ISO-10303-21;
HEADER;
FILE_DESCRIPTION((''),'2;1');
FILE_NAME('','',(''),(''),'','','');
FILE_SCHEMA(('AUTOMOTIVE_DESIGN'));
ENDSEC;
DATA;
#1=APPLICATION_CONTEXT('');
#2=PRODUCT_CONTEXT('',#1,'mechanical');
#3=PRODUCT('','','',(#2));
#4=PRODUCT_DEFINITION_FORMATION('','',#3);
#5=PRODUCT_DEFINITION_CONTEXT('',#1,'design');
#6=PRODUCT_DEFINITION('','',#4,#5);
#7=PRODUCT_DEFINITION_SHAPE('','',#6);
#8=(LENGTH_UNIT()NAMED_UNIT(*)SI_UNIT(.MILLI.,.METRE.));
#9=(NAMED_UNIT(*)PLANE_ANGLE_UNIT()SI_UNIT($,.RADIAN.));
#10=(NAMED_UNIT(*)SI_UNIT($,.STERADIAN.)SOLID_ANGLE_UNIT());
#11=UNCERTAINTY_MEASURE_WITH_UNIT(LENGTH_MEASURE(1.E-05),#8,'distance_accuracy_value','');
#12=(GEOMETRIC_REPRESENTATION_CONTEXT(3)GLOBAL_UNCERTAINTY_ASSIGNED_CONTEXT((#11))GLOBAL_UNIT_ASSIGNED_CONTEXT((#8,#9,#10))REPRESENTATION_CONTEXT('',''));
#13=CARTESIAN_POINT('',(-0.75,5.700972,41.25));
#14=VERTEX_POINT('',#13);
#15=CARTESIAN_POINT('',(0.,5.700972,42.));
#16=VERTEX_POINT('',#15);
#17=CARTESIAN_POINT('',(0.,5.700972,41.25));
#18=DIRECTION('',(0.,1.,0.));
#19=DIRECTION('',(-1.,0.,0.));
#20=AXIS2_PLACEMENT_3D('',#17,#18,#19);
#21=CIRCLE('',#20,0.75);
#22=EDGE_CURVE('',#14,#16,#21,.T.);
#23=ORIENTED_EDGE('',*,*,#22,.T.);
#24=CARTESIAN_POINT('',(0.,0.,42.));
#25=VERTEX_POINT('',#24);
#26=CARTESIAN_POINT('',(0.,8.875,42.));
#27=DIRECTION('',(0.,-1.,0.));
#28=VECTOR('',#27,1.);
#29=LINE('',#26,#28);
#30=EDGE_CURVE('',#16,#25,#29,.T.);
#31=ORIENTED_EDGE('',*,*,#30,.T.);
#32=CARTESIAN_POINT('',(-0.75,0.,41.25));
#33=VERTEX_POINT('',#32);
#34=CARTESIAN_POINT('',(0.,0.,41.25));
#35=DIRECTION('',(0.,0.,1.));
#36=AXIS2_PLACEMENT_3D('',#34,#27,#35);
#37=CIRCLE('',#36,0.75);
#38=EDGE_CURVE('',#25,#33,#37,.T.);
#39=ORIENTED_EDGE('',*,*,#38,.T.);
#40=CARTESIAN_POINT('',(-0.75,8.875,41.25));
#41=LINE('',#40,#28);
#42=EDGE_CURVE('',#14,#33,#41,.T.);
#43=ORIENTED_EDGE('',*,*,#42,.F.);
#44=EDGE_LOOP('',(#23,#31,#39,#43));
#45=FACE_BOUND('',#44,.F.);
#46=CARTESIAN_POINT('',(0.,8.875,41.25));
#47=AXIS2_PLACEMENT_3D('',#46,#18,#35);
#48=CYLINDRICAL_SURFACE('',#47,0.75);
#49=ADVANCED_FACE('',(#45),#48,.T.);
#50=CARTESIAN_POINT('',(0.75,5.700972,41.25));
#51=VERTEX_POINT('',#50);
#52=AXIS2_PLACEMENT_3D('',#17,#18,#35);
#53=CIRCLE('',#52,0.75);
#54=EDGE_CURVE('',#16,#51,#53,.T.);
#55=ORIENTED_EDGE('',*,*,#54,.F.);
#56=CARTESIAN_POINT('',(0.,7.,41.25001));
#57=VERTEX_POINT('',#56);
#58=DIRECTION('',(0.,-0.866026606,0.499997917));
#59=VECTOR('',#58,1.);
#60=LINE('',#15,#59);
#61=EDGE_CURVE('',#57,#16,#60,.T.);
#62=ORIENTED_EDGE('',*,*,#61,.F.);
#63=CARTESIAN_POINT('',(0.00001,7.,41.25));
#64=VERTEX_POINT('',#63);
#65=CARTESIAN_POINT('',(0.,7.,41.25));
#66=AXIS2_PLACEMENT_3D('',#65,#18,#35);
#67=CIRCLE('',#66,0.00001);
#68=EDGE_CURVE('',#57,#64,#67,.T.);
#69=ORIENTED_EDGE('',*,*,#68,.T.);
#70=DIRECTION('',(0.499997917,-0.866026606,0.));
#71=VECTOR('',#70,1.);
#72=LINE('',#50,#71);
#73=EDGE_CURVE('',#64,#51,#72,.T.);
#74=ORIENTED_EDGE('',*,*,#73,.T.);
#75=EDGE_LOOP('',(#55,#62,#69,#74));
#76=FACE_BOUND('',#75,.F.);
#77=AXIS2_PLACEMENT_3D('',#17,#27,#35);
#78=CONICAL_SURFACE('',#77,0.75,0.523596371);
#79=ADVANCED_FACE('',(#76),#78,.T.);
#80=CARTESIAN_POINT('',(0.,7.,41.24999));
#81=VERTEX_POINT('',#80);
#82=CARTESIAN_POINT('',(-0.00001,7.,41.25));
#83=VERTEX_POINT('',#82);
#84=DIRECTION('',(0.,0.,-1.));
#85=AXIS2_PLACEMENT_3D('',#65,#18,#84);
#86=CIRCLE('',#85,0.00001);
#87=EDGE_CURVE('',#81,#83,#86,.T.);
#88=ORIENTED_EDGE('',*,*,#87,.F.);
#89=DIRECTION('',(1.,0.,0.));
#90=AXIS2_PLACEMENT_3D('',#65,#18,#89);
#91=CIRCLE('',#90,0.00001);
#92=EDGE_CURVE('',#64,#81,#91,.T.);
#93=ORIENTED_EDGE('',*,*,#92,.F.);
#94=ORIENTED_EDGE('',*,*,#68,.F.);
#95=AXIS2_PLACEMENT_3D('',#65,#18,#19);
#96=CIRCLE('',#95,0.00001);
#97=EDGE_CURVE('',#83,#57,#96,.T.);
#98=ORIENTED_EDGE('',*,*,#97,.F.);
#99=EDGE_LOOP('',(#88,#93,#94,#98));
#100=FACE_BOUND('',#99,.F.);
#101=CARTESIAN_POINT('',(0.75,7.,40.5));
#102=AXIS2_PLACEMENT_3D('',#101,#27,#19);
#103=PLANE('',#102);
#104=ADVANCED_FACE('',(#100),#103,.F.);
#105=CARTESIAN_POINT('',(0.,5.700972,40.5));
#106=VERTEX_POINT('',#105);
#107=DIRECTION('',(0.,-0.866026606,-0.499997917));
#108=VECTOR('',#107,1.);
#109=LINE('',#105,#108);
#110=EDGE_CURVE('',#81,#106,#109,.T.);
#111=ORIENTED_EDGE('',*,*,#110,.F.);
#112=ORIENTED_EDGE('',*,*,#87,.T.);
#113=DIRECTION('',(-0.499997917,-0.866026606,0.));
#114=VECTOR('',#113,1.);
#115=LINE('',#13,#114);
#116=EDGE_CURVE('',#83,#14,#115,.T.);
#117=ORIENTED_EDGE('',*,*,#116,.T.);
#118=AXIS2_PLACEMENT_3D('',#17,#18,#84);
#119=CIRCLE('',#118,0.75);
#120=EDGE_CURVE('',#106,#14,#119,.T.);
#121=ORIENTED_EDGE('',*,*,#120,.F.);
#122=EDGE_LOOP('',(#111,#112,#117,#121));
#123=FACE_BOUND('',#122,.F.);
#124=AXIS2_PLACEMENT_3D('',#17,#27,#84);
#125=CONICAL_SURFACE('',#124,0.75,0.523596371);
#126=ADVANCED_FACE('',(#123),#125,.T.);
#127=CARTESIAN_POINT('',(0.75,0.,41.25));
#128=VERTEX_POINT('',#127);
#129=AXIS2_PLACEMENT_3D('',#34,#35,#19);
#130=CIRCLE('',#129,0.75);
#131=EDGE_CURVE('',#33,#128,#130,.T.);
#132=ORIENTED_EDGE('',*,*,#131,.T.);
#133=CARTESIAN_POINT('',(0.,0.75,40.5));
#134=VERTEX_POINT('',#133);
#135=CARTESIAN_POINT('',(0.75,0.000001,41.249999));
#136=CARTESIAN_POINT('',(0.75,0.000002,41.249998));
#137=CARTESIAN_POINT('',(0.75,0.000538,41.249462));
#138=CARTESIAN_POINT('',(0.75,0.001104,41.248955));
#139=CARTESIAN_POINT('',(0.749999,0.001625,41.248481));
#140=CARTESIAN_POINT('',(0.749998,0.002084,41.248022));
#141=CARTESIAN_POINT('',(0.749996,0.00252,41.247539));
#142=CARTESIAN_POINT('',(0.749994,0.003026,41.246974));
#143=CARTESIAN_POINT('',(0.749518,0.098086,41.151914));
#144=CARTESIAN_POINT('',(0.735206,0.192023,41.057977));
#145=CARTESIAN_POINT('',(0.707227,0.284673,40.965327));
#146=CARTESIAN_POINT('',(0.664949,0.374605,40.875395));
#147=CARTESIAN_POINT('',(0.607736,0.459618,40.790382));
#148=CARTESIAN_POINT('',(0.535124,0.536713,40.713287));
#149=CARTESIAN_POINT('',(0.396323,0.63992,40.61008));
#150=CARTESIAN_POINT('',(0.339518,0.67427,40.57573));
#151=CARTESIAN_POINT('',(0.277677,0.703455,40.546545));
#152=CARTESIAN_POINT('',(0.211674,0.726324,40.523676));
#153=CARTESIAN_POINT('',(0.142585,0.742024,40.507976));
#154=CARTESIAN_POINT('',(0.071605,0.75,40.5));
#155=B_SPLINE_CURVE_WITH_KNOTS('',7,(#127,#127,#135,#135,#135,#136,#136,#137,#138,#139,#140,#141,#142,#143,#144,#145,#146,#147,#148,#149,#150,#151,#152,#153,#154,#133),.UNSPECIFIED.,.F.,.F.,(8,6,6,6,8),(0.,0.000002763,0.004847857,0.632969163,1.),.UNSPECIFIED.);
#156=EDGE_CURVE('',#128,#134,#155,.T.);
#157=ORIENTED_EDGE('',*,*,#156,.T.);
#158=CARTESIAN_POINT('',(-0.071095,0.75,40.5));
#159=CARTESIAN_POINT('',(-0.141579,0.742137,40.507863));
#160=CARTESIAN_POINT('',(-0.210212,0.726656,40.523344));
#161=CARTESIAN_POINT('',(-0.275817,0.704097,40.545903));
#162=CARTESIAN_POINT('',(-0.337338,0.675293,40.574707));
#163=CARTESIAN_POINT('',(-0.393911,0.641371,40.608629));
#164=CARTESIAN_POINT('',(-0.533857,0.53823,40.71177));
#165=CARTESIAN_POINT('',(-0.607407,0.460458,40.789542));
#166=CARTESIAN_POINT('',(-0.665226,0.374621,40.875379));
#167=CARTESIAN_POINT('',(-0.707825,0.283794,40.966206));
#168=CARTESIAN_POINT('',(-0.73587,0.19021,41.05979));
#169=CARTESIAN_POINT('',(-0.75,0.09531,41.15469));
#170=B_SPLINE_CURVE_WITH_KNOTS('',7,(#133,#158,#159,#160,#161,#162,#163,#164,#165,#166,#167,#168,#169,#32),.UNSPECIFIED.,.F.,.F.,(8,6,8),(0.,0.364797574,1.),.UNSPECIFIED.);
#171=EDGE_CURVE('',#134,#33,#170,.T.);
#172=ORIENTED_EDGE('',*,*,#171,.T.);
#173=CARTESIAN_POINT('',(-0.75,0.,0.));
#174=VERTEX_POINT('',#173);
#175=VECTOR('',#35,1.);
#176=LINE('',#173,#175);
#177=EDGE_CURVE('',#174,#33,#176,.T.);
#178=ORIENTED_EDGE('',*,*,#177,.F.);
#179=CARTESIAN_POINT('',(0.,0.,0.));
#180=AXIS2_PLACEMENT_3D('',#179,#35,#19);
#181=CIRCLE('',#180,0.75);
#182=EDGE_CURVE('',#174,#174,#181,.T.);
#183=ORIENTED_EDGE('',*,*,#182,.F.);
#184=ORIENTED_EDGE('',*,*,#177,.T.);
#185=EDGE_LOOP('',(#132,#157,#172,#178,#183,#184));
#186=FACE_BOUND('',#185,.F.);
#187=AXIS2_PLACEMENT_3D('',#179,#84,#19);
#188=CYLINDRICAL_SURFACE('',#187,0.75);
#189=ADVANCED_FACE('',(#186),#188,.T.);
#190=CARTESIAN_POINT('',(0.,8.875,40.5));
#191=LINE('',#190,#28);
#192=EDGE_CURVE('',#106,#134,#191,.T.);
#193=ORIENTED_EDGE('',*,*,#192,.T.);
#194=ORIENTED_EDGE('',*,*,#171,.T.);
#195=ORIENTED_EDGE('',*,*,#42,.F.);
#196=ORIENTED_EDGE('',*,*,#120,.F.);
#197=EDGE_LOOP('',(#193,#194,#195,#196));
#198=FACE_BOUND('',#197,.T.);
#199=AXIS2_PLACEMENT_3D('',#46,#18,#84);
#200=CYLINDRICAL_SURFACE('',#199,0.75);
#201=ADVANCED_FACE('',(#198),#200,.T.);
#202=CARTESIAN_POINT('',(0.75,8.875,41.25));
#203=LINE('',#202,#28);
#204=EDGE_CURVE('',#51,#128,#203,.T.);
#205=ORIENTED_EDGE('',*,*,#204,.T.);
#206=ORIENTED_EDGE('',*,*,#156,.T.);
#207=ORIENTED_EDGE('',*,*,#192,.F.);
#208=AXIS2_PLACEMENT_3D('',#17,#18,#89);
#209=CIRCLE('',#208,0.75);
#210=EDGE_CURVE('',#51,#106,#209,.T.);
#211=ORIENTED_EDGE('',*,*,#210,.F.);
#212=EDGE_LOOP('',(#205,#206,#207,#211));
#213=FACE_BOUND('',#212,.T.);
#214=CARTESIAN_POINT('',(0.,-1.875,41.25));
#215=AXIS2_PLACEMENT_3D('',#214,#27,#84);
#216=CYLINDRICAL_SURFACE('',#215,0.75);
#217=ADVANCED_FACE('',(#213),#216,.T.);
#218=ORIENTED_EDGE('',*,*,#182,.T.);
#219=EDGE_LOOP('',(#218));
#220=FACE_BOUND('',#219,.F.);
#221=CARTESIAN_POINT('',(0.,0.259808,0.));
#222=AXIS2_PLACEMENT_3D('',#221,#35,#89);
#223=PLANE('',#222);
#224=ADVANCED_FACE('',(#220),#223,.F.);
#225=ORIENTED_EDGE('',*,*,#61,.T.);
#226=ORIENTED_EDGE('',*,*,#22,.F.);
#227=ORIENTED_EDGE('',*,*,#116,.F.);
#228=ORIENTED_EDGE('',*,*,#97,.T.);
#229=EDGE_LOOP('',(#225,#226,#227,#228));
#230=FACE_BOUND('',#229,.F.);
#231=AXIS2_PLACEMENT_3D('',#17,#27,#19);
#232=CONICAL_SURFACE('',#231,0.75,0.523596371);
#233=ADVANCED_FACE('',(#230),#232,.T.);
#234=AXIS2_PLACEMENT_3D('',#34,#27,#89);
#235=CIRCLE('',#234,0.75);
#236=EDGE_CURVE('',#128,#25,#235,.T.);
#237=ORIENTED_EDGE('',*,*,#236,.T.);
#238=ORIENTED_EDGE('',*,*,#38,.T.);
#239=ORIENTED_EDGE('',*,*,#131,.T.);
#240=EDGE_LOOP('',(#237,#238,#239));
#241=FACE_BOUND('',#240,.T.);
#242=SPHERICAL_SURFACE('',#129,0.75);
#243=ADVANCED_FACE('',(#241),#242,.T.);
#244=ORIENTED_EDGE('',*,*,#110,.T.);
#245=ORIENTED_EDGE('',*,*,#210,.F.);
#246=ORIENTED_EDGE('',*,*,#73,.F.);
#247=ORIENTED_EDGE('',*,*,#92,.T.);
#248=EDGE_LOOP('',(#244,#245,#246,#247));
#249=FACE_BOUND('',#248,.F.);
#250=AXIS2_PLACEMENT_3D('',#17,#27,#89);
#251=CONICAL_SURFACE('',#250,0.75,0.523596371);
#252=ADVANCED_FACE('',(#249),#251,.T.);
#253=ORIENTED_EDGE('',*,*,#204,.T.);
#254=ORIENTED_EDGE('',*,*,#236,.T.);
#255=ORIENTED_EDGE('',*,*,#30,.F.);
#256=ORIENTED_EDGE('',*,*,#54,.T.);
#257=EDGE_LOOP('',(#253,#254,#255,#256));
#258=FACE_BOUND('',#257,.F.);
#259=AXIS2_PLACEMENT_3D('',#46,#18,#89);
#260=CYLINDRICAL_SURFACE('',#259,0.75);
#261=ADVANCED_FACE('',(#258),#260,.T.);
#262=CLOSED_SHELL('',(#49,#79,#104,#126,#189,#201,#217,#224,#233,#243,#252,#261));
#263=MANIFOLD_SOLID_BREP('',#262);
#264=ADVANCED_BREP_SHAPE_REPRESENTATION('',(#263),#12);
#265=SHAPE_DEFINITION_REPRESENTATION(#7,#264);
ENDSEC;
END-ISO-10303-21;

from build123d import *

# Parameters (mm, degrees)
F1_DEPTH     = 42
F2_START     = 40.5
F2_DEPTH     = 1.5
F3_T1_DEPTH  = 8.875
F3_T4_ANGLE  = 180
F3_T8_DEPTH  = 10.75
F3_S9_R      = 0.75
F3_T10_DEPTH = 7
F3_T14_DEPTH = 10.75
F3_S15_R     = 0.75
F3_T16_DEPTH = 7
F4_SIZE2     = 1.299028
F4_SIZE      = 0.74999


# Not quite as in the source:
# - a fillet or chamfer that OpenCascade refuses, or shapes differently, is made with other operations: its cross-section is extruded or revolved along the edge and cut away or added
# - a fillet or chamfer is up to 0.001 mm smaller than in the source, because OpenCascade refuses the exact size


with BuildPart() as f1:
    # F0 (on Top) → F1 (new body)
    with BuildSketch(Plane.XY):
        with BuildLine():
            Line((-0.75, 0), (0.75, 0))
            ThreePointArc((0.75, 0), (0, 0.75), (-0.75, 0))
        make_face()
        with BuildLine():
            ThreePointArc((-0.75, 0), (0, -0.75), (0.75, 0))
            Line((0.75, 0), (-0.75, 0))
        make_face()
    extrude(amount=F1_DEPTH)

    # F0 (on Top) → F2 (join)
    with BuildSketch(Plane.XY.offset(F2_START)):
        with BuildLine():
            ThreePointArc((-0.75, 0), (0, 0.75), (0.75, 0))
            Line((0.75, 0), (0.75, 7))
            Line((0.75, 7), (-0.75, 7))
            Line((-0.75, 7), (-0.75, 0))
        make_face()
    extrude(amount=F2_DEPTH)

    # F3: fillet of radius 0.75 on 5 edges, made by hand

    # F3_s2 → F3_t1 (cut)
    with BuildSketch(Plane.XZ.offset(-8.875)):
        with BuildLine():
            ThreePointArc((0.75, 41.25), (0.5303300859, 41.7803300859), (0, 42))
            Line((0, 42), (0.75, 42))
            Line((0.75, 42), (0.75, 41.25))
        make_face()
        with BuildLine():
            ThreePointArc((0, 42), (-0.5303300859, 41.7803300859), (-0.75, 41.25))
            Line((-0.75, 41.25), (-0.75, 42))
            Line((-0.75, 42), (0, 42))
        make_face()
    extrude(amount=F3_T1_DEPTH, mode=Mode.SUBTRACT)

    # F3_s3 → F3_t4 (revolve, cut)
    with BuildSketch(Plane.XZ):
        with BuildLine():
            ThreePointArc((-0.75, 41.25), (-0.5303300859, 41.7803300859), (0, 42))
            Line((0, 42), (-0.75, 42))
            Line((-0.75, 42), (-0.75, 41.25))
        make_face()
    revolve(axis=Axis((0, 0, 42), (0, 0, 1)), revolution_arc=F3_T4_ANGLE, mode=Mode.SUBTRACT)


with BuildPart() as f3_tool6:
    # F3_s7 → F3_t8 (new body)
    with BuildSketch(Plane.XZ.offset(-8.875)):
        with BuildLine():
            ThreePointArc((0, 40.5), (-0.5303300859, 40.7196699141), (-0.75, 41.25))
            Line((-0.75, 41.25), (-0.75, 40.5))
            Line((-0.75, 40.5), (0, 40.5))
        make_face()
    extrude(amount=F3_T8_DEPTH)

    # F3_s9 → F3_t10 (cut, symmetric)
    with BuildSketch(Plane.XY.offset(40.9)):
        Circle(F3_S9_R)
    extrude(amount=F3_T10_DEPTH, both=True, mode=Mode.SUBTRACT)


with BuildPart() as f1_1:
    add(f1.part)

    # F3_t5: cut F3_tool6
    add(f3_tool6.part, mode=Mode.SUBTRACT)


with BuildPart() as f3_tool12:
    # F3_s13 → F3_t14 (new body)
    with BuildSketch(Plane.XZ.offset(1.875)):
        with BuildLine():
            ThreePointArc((0, 40.5), (0.5303300859, 40.7196699141), (0.75, 41.25))
            Line((0.75, 41.25), (0.75, 40.5))
            Line((0.75, 40.5), (0, 40.5))
        make_face()
    extrude(amount=-F3_T14_DEPTH)

    # F3_s15 → F3_t16 (cut, symmetric)
    with BuildSketch(Plane.XY.offset(40.9)):
        Circle(F3_S15_R)
    extrude(amount=F3_T16_DEPTH, both=True, mode=Mode.SUBTRACT)


with BuildPart() as f1_2:
    add(f1_1.part)

    # F3_t11: cut F3_tool12
    add(f3_tool12.part, mode=Mode.SUBTRACT)

    # F4 (size 0.75 and 1.2990381057 in the source; OpenCascade refuses exactly that, so slightly less here)
    f4_edges = [f1_2.edges().sort_by_distance(p)[0] for p in [
        (-0.53033, 7, 40.71967),
        (0.53033, 7, 40.71967),
        (-0.53033, 7, 41.78033),
        (0.53033, 7, 41.78033),
    ]]
    f4_side = f1_2.faces().sort_by_distance((0, 7, 41.25))[0]
    chamfer(f4_edges, length=F4_SIZE, length2=F4_SIZE2, reference=f4_side)


solid = f1_2.part
